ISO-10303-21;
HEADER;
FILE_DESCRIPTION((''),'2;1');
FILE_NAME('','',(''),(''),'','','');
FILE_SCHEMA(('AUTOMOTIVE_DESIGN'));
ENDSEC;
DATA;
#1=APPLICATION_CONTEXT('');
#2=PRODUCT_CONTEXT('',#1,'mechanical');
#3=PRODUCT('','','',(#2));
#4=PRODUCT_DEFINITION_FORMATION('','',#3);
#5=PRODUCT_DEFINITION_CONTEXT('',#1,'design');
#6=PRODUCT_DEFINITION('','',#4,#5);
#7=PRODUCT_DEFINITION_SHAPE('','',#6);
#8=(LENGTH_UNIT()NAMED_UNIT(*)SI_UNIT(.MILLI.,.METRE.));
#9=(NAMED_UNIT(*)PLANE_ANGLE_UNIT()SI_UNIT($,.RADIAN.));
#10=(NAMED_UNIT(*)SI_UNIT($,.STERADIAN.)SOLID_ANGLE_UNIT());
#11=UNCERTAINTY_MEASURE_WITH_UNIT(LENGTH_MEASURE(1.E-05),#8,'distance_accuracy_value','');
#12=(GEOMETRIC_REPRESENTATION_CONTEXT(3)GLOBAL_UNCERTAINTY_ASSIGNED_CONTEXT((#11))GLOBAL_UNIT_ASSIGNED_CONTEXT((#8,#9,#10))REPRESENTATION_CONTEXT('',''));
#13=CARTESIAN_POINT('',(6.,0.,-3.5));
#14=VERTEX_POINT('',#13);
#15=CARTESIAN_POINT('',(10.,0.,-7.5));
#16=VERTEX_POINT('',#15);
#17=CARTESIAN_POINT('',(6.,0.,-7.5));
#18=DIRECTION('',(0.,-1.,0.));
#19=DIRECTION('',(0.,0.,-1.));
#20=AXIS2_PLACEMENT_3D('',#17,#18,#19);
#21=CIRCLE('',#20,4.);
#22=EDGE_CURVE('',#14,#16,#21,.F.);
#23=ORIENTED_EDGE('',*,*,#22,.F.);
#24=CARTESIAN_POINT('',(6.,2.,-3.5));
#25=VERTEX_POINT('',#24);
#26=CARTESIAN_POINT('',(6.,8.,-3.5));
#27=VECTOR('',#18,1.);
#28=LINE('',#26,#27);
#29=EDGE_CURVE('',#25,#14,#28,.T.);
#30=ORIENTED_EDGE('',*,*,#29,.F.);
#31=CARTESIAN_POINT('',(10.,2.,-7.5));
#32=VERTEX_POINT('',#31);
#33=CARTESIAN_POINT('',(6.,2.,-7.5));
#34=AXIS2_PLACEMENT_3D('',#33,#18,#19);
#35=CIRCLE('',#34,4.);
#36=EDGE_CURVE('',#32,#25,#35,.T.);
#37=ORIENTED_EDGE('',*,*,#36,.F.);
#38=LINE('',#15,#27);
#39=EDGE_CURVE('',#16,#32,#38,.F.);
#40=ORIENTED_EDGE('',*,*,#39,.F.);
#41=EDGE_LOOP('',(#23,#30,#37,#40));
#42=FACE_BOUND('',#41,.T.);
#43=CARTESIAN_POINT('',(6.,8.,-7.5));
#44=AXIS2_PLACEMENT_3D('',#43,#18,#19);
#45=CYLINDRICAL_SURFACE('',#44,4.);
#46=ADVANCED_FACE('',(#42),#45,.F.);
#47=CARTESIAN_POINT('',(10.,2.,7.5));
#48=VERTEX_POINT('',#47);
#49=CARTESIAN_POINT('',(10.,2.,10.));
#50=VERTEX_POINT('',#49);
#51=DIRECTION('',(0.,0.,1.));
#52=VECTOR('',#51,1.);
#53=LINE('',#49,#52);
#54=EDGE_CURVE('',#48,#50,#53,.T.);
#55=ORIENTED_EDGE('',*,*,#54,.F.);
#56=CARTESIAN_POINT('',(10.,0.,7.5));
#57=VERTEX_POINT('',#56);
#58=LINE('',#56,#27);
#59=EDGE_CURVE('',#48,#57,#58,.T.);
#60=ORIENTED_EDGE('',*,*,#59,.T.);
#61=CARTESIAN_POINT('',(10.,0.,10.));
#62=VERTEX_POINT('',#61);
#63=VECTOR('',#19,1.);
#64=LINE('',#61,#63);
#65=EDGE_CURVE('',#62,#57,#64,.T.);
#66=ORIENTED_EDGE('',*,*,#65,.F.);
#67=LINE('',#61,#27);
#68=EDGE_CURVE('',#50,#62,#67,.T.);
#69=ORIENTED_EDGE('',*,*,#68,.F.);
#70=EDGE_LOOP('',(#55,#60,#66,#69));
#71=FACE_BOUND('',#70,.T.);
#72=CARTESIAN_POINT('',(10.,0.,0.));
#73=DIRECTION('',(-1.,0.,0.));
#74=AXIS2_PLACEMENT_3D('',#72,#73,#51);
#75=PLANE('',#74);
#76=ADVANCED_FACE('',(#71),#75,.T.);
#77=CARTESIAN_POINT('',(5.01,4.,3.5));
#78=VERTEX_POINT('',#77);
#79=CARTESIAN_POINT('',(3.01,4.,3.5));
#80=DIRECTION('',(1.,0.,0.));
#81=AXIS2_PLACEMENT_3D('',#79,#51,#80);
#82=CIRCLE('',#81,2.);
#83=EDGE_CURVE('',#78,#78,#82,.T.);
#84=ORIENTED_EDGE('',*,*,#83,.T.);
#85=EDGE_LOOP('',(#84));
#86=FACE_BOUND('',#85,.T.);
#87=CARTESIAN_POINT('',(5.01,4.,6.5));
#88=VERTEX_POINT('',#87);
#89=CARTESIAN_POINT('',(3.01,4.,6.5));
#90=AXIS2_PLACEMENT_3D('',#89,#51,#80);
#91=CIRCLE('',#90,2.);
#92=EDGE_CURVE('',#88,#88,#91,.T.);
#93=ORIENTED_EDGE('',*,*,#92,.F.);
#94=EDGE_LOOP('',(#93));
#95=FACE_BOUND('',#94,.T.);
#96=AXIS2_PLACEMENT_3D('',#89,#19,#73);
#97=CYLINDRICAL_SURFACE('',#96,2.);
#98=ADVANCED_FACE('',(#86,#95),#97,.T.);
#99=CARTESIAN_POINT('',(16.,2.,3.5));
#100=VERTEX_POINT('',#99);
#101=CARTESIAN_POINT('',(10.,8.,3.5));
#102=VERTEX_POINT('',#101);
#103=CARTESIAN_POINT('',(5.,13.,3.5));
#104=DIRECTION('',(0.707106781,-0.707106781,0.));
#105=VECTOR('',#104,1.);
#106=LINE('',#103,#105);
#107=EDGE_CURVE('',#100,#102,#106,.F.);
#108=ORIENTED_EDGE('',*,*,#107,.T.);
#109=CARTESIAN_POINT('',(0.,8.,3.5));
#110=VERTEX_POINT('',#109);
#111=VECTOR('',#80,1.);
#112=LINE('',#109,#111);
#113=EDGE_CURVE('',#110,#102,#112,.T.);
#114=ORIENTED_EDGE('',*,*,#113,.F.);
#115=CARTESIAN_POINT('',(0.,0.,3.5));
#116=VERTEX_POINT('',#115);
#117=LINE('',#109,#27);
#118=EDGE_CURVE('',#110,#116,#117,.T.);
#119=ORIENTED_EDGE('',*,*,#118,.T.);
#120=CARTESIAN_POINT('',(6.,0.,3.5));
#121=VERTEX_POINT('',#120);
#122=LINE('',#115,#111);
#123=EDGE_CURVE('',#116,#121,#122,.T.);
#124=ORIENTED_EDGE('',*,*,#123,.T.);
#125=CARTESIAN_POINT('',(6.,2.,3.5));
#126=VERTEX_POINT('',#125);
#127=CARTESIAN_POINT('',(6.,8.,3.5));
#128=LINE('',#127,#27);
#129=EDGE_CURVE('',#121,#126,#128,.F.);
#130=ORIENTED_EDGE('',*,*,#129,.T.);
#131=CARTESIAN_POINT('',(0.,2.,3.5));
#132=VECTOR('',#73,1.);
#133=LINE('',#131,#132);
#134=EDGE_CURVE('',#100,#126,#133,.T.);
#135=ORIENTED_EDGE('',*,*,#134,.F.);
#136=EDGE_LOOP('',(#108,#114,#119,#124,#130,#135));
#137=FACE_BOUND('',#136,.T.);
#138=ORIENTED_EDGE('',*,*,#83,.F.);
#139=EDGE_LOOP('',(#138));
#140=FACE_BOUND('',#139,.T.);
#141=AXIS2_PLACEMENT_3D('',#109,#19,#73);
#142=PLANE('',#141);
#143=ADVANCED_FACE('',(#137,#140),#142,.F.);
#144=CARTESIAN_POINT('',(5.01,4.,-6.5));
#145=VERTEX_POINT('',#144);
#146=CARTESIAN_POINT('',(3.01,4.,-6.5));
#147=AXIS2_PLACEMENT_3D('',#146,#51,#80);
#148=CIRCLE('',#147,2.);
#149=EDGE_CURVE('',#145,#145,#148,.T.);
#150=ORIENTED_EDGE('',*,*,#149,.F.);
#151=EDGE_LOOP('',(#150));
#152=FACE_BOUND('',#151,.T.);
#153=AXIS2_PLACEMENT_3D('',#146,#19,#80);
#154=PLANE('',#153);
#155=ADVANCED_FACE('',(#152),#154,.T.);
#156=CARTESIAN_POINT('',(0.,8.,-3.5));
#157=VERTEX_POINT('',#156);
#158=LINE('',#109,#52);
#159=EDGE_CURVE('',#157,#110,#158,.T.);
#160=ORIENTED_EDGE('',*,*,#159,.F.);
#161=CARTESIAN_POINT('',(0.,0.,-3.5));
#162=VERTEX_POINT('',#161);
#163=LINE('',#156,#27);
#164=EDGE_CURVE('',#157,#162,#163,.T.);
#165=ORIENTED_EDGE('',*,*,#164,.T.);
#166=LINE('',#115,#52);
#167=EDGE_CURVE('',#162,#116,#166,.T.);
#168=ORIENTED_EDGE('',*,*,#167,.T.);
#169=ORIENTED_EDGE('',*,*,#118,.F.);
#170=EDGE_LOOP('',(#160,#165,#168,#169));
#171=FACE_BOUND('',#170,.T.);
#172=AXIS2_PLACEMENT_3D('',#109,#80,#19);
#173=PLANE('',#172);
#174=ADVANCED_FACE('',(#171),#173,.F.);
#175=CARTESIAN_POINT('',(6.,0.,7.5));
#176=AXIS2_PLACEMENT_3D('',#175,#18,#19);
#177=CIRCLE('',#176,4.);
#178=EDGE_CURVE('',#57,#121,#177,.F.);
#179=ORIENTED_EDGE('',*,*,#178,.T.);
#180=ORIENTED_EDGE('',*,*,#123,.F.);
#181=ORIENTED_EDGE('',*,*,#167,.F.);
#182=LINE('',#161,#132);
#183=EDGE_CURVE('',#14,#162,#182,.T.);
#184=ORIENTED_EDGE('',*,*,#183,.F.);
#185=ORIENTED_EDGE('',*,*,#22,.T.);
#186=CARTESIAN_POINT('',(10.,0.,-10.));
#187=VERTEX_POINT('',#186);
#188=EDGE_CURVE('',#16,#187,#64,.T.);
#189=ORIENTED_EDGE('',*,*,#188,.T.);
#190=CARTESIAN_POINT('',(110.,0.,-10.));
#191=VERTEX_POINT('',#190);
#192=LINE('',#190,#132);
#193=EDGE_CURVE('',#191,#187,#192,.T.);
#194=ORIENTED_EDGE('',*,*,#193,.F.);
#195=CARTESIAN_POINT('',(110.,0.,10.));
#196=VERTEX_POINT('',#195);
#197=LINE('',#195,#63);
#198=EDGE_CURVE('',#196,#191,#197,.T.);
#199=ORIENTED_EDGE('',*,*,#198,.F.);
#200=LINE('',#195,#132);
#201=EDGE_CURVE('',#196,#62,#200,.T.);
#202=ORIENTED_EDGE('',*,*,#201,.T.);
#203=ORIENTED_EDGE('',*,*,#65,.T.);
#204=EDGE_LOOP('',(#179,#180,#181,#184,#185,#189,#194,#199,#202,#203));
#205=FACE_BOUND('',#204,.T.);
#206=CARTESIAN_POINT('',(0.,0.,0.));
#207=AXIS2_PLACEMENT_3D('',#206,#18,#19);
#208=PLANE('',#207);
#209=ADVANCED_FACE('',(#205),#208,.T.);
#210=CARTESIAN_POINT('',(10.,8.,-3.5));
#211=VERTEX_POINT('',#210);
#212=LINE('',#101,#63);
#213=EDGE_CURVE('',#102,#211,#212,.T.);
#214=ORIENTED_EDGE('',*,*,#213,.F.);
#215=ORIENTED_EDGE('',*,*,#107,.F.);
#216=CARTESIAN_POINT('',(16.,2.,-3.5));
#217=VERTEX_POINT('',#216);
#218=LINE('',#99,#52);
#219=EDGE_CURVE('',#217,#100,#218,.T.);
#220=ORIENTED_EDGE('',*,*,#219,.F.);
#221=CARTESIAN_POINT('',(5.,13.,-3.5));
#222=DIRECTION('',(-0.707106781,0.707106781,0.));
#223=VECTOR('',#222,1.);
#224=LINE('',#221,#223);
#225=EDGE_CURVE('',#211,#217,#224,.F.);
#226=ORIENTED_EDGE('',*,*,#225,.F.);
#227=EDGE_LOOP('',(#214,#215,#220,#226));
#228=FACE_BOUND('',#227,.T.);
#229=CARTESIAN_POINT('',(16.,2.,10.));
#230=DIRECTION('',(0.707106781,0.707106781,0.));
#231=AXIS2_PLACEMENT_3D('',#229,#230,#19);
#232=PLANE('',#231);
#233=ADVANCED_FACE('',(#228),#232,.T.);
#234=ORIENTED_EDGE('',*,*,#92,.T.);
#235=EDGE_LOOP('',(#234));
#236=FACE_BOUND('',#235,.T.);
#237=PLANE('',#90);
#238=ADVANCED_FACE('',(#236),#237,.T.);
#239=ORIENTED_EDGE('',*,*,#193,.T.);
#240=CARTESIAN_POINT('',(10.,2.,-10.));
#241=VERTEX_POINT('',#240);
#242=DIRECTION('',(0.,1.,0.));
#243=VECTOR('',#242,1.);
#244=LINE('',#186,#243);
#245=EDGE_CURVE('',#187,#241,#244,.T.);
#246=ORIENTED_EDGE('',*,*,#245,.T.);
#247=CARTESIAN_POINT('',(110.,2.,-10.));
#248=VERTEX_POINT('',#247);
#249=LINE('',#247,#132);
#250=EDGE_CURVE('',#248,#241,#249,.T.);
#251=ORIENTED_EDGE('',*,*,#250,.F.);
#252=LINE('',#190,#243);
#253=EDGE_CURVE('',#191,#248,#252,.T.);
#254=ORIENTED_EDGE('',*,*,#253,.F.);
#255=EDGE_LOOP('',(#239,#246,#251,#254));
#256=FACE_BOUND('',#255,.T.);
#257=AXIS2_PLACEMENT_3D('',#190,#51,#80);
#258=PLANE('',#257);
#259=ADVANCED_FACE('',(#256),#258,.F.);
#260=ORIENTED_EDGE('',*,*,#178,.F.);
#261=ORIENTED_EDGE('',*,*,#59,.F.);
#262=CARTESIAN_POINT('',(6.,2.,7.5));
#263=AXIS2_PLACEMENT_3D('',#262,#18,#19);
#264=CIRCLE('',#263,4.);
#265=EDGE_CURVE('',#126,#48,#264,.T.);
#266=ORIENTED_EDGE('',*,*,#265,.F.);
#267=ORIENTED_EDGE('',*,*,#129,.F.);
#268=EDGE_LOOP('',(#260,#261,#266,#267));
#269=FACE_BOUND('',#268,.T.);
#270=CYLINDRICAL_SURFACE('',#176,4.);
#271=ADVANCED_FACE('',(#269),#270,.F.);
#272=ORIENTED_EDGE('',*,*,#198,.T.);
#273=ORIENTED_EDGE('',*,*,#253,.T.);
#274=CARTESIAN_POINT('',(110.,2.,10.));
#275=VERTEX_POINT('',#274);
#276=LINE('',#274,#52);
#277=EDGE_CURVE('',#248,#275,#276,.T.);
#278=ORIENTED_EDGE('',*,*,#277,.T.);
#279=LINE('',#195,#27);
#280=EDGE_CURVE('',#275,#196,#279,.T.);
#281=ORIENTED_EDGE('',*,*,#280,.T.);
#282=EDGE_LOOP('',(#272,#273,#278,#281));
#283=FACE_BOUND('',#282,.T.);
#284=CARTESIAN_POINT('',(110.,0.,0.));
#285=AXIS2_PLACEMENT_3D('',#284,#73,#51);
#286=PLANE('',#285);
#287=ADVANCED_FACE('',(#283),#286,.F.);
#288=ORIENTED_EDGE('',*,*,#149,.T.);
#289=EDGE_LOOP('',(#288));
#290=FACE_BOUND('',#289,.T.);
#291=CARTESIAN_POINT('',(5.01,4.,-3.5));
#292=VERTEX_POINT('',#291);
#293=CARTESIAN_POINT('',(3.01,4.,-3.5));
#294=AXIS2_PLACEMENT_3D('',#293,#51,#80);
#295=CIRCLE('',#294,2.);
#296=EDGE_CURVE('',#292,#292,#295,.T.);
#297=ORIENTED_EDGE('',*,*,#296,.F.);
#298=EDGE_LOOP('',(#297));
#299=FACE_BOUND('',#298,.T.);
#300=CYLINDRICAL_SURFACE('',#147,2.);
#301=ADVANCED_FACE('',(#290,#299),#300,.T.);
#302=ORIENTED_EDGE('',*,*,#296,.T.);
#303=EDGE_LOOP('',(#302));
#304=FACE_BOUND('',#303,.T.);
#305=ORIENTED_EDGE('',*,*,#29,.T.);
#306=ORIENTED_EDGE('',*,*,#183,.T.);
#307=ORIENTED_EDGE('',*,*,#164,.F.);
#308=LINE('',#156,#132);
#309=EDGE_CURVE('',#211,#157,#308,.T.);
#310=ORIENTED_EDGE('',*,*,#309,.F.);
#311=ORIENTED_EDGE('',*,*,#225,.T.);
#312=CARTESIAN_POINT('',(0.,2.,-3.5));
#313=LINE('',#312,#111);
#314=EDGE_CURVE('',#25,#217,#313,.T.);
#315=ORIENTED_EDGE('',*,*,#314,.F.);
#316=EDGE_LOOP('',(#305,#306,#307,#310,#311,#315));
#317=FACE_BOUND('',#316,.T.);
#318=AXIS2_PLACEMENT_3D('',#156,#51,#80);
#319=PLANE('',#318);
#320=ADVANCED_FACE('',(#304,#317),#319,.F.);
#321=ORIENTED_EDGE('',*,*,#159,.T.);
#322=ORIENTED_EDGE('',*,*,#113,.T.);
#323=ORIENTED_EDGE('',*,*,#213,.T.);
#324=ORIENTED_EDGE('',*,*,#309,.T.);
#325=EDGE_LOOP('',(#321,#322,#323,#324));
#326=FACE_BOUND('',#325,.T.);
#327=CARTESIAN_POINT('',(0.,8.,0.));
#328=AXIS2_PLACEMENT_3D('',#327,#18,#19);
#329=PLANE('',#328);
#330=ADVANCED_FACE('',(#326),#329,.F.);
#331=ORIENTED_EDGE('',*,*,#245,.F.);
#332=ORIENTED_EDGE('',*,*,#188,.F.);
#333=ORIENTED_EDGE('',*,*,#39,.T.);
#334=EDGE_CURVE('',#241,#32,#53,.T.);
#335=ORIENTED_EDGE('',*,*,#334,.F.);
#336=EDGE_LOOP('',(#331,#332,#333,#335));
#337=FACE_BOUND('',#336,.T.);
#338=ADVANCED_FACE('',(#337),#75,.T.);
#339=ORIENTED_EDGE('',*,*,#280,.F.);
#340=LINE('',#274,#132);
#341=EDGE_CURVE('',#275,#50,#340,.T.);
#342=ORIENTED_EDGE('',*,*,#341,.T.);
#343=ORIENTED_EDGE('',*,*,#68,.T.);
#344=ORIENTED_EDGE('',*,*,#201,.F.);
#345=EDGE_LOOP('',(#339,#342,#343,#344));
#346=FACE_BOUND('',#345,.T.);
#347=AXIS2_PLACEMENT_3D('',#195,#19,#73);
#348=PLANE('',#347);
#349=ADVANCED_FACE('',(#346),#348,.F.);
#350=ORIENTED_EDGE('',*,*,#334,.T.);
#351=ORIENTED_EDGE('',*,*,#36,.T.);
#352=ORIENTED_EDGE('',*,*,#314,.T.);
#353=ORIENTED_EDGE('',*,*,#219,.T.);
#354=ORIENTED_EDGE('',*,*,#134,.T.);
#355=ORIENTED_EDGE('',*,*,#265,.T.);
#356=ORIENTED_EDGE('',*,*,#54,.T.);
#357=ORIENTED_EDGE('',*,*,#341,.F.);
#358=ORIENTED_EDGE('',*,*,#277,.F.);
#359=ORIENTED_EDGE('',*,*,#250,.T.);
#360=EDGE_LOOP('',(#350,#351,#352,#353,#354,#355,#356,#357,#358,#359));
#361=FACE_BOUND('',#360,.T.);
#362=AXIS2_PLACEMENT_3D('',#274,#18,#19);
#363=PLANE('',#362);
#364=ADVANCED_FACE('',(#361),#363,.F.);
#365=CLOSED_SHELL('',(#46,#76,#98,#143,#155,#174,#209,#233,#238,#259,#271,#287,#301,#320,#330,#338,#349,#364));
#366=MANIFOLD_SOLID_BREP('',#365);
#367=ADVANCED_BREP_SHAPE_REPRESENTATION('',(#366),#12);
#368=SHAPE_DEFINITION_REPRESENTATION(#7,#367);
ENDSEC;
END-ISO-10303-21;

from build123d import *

# Parameters (mm, degrees)
SKETCH2_W           = 10
SKETCH2_H           = 7
BOSS_EXTRUDE1_DEPTH = 8
SKETCH3_R           = 2
BOSS_EXTRUDE2_DEPTH = 3
SKETCH4_W           = 20
SKETCH4_H           = 2
BOSS_EXTRUDE3_DEPTH = 100
CHAMFER1_SIZE       = 6
FILLET1_R           = 4


with BuildPart() as part:
    # Sketch2 → Boss-Extrude1 (new body)
    with BuildSketch(Plane(origin=(0, 0, 0), x_dir=(1, 0, 0), z_dir=(0, 1, 0))):
        with Locations((5, 0)):
            Rectangle(SKETCH2_W, SKETCH2_H)
    extrude(amount=BOSS_EXTRUDE1_DEPTH)

    # Sketch3 → Boss-Extrude2 (add)
    with BuildSketch(Plane.XY.offset(3.5)):
        with Locations((3.01, 4)):
            Circle(SKETCH3_R)
    boss_extrude2 = extrude(amount=BOSS_EXTRUDE2_DEPTH)

    # Mirror1: Boss-Extrude2 across plane
    add(boss_extrude2.mirror(Plane.XY))

    # Sketch4 → Boss-Extrude3 (add)
    with BuildSketch(Plane(origin=(10, 0, 0), x_dir=(0, 0, -1), z_dir=(1, 0, 0))):
        with Locations((0, 1)):
            Rectangle(SKETCH4_W, SKETCH4_H)
    extrude(amount=BOSS_EXTRUDE3_DEPTH)

    # Chamfer1
    chamfer1_edges = [part.edges().sort_by_distance(p)[0] for p in [
        (10, 2, 0),
    ]]
    chamfer(chamfer1_edges, length=CHAMFER1_SIZE - 0.0001)  # a hair under: the kernel refuses the full size

    # Fillet1
    fillet1_edges = [part.edges().sort_by_distance(p)[0] for p in [
        (10, 1, -3.5),
        (10, 1, 3.5),
    ]]
    fillet(fillet1_edges, radius=FILLET1_R)


solid = part.part
